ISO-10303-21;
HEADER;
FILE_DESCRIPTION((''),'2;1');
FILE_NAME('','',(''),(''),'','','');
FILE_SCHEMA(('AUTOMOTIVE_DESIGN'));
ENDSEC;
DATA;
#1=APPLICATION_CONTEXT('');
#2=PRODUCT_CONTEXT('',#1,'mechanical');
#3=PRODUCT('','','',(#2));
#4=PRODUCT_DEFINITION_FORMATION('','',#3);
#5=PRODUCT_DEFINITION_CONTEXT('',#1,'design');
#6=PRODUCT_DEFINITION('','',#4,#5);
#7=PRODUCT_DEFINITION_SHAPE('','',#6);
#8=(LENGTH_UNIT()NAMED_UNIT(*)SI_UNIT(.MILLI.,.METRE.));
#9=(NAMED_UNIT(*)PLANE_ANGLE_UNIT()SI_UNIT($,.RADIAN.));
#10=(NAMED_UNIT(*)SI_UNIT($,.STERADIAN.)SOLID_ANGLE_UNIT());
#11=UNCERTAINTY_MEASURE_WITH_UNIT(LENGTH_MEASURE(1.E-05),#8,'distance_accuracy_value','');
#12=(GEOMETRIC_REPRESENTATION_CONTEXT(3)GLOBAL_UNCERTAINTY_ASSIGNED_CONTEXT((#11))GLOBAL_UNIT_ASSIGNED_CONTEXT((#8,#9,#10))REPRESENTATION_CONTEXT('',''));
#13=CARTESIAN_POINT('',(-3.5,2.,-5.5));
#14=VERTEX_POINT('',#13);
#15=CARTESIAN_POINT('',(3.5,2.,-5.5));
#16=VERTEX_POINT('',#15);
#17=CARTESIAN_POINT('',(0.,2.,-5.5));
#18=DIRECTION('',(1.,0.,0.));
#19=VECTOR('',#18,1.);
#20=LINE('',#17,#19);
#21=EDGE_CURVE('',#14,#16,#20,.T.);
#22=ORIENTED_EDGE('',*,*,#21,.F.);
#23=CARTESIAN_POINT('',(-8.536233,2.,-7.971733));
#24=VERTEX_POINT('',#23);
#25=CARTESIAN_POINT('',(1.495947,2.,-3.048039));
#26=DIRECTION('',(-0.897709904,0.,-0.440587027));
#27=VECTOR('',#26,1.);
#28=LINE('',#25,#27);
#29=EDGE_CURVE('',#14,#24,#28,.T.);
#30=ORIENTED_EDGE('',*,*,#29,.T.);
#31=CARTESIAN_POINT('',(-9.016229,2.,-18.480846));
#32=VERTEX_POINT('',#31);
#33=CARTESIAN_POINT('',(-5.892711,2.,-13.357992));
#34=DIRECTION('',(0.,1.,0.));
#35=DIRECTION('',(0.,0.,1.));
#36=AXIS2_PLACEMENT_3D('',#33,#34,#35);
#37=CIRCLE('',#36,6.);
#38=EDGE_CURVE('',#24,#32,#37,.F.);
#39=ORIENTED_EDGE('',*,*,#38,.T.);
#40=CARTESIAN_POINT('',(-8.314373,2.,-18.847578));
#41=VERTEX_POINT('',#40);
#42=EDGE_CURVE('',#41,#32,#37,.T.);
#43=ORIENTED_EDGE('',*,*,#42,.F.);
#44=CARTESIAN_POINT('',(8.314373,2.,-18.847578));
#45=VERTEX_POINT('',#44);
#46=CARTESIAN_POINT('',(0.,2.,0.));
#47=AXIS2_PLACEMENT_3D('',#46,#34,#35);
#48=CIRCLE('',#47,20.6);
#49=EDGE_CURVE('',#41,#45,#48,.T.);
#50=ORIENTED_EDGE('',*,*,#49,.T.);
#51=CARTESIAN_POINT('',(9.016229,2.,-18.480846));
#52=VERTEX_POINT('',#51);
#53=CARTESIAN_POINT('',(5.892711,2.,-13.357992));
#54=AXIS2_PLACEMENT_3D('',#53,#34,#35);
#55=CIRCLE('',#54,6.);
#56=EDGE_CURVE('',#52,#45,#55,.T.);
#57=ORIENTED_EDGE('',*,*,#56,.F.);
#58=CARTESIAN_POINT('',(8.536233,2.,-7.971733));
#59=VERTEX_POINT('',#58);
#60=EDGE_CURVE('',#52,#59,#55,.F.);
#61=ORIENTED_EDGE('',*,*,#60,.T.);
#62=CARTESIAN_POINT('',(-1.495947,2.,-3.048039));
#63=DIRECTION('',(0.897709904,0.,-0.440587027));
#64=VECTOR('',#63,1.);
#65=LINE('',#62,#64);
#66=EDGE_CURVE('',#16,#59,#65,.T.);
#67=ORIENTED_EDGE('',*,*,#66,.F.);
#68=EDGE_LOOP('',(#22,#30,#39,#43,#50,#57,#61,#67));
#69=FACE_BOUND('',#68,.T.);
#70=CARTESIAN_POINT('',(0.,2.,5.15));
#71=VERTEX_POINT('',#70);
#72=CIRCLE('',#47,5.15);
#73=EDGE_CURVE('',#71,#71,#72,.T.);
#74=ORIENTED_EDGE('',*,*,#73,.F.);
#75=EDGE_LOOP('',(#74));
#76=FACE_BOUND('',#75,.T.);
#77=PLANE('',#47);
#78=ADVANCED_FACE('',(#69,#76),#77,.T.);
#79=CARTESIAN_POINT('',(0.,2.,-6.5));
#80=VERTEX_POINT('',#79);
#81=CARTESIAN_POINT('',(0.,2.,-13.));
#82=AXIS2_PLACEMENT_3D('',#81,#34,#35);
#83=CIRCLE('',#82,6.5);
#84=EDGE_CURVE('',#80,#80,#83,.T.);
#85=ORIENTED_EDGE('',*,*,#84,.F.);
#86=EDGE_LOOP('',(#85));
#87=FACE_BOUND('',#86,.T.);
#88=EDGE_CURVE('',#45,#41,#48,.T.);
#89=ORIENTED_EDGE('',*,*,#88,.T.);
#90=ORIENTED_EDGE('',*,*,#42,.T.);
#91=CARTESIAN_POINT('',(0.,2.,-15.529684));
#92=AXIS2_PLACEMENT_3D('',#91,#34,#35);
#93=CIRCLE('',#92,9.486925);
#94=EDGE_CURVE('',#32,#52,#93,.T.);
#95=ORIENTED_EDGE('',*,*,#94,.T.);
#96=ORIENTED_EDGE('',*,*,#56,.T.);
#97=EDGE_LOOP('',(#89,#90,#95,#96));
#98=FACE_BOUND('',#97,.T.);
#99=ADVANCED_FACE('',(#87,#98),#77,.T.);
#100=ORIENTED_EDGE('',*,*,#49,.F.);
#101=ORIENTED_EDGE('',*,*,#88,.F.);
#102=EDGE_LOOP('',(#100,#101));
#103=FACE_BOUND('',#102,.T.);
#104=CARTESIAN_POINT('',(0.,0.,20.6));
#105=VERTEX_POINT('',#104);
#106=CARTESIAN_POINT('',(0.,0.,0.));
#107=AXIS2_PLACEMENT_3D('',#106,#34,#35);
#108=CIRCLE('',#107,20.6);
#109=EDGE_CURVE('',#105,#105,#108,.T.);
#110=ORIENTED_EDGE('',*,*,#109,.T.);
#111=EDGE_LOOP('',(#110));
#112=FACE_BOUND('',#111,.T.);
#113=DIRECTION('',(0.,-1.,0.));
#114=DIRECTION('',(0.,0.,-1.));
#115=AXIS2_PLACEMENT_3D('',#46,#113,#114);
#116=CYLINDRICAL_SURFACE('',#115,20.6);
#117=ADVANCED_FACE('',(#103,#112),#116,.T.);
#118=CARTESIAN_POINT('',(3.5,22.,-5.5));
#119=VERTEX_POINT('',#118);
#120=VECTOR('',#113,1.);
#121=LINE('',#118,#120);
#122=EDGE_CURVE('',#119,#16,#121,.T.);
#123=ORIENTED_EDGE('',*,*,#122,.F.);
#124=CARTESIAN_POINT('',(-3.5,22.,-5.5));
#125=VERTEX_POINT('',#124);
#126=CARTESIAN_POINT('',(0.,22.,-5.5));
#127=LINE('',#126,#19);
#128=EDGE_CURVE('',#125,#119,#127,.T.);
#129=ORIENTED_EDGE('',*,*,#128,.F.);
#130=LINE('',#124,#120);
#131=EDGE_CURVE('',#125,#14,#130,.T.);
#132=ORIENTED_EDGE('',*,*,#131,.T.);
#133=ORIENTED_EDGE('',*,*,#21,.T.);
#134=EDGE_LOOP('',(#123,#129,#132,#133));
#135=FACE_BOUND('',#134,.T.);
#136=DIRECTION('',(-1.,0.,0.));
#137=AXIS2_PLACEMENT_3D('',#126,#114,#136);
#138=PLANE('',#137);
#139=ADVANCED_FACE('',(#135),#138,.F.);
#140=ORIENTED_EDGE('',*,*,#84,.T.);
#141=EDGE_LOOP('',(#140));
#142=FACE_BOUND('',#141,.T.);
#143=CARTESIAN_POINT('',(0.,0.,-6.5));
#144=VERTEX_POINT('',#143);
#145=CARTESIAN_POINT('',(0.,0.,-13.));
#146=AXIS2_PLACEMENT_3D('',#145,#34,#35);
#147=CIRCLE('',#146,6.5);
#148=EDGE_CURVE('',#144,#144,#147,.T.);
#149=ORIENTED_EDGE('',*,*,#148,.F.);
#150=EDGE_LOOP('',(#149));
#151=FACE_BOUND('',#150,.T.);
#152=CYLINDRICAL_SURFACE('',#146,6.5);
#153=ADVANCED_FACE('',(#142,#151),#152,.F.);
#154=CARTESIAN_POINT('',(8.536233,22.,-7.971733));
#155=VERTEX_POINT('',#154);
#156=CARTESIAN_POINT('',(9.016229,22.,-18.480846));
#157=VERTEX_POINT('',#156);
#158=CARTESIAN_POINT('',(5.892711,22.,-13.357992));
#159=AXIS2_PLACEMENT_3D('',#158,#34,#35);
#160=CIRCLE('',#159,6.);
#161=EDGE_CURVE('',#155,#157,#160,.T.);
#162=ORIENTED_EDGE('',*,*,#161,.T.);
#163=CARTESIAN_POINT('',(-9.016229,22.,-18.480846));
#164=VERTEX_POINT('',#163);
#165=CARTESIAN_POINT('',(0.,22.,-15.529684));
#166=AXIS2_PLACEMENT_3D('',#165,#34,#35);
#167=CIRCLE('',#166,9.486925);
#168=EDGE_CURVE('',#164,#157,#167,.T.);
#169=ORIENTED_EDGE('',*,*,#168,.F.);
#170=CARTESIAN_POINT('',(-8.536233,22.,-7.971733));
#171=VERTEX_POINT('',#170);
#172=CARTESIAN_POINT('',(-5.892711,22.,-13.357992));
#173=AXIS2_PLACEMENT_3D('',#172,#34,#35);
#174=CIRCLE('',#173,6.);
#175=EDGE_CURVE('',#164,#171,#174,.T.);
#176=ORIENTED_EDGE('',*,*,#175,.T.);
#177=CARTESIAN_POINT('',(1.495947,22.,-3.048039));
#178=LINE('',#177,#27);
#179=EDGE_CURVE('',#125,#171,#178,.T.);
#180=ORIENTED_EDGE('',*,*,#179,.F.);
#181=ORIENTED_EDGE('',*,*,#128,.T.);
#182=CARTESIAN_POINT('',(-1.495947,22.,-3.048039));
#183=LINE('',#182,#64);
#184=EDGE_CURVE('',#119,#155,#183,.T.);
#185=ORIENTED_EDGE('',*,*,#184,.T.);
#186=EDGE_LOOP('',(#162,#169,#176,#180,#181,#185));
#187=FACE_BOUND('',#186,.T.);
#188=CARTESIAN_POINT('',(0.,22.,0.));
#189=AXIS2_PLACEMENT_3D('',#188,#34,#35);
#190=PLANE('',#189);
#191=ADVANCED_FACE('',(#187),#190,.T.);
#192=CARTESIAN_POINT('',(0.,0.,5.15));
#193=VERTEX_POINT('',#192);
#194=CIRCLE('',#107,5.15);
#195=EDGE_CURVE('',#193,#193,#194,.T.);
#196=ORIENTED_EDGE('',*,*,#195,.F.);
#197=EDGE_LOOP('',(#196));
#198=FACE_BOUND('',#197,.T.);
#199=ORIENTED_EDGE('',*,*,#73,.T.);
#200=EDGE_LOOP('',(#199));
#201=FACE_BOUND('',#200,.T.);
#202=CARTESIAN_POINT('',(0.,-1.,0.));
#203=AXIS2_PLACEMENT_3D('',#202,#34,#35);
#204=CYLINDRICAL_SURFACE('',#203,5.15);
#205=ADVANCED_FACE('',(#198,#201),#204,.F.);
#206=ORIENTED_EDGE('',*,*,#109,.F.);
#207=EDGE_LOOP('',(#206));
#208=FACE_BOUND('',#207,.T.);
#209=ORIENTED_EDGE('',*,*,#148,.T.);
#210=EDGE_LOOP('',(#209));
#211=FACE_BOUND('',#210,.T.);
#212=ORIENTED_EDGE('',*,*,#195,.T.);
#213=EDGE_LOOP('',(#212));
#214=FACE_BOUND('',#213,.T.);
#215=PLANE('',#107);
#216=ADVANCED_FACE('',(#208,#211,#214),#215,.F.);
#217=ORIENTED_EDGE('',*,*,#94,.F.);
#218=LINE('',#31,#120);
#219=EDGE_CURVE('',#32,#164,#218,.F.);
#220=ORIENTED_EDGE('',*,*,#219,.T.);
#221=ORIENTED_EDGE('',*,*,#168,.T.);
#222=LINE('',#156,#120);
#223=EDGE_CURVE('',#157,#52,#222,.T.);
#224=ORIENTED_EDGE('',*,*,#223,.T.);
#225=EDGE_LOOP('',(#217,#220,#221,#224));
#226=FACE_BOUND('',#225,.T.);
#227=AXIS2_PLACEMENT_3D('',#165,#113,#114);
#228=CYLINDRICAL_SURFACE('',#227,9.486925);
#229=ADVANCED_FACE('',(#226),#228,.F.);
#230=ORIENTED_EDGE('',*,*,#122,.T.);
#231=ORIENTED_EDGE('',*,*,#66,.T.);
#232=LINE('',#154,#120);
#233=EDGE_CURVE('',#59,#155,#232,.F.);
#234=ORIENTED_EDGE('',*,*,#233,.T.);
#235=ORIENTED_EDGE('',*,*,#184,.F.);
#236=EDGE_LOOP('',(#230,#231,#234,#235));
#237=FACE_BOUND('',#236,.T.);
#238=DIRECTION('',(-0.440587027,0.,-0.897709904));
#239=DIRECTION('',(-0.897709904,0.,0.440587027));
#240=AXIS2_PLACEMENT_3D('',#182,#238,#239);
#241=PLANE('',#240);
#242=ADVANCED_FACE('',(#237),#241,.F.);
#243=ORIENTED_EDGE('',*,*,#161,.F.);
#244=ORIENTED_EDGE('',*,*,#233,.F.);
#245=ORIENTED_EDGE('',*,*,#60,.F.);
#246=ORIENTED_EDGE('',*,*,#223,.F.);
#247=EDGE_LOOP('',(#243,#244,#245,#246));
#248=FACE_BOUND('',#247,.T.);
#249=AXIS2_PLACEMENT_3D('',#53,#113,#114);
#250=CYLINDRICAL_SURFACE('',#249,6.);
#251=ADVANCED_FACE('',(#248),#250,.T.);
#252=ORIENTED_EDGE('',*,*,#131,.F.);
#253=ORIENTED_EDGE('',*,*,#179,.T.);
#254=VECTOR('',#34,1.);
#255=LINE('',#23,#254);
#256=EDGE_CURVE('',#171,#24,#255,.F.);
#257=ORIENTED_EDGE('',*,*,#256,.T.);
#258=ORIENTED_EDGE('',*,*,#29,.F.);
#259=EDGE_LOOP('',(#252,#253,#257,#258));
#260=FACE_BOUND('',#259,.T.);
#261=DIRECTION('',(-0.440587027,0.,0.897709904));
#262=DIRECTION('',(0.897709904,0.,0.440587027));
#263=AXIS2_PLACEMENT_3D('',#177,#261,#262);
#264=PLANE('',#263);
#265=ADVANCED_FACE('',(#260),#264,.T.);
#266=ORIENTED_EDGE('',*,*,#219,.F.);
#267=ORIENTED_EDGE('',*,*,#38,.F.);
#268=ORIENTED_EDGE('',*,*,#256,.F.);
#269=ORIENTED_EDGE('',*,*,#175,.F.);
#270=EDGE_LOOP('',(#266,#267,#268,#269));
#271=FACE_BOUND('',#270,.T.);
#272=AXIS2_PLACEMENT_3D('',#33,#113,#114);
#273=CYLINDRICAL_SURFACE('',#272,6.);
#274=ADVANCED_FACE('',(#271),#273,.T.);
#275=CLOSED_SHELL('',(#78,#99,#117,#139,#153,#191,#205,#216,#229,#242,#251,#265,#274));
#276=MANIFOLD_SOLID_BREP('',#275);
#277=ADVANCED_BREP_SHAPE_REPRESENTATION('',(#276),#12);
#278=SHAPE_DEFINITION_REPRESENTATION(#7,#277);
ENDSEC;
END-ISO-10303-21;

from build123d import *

# Parameters (mm, degrees)
SKETCH1_R           = 20.6
BOSS_EXTRUDE1_DEPTH = 2
SKETCH2_R           = 5.15
CUT_EXTRUDE1_DEPTH  = 3
SKETCH3_R           = 6.5
CUT_EXTRUDE2_DEPTH  = 2
BOSS_EXTRUDE4_DEPTH = 20
FILLET2_R           = 6


with BuildPart() as part:
    # Sketch1 → Boss-Extrude1 (new body)
    with BuildSketch(Plane(origin=(0, 0, 0), x_dir=(1, 0, 0), z_dir=(0, 1, 0))):
        with Locations(Location((0, 0, 0), (0, 0, 270))):
            Circle(SKETCH1_R)
    extrude(amount=BOSS_EXTRUDE1_DEPTH)

    # Sketch2 → Cut-Extrude1 (cut)
    with BuildSketch(Plane(origin=(0, 2, 0), x_dir=(1, 0, 0), z_dir=(0, 1, 0))):
        with Locations(Location((0, 0, 0), (0, 0, 270))):
            Circle(SKETCH2_R)
    extrude(amount=-CUT_EXTRUDE1_DEPTH, mode=Mode.SUBTRACT)

    # Sketch3 → Cut-Extrude2 (cut)
    with BuildSketch(Plane(origin=(0, 2, 0), x_dir=(1, 0, 0), z_dir=(0, 1, 0))):
        with Locations(Location((0, 13, 0), (0, 0, 270))):
            Circle(SKETCH3_R)
    extrude(amount=-CUT_EXTRUDE2_DEPTH, mode=Mode.SUBTRACT)

    # Sketch4 → Boss-Extrude4 (add)
    with BuildSketch(Plane(origin=(0, 2, 0), x_dir=(1, 0, 0), z_dir=(0, 1, 0))):
        with BuildLine():
            Line((-16.743954133, 12), (-3.5, 5.5))
            Line((-3.5, 5.5), (3.5, 5.5))
            Line((3.5, 5.5), (16.743954133, 12))
            ThreePointArc((16.743954133, 12), (13.279606143, 15.748398671), (9, 18.529975715))
            ThreePointArc((9, 18.529975715), (0, 6.042759079), (-9, 18.529975715))
            ThreePointArc((-9, 18.529975715), (-13.279606143, 15.748398671), (-16.743954133, 12))
        make_face()
    extrude(amount=BOSS_EXTRUDE4_DEPTH)

    # Fillet2
    # the kernel refuses this fillet: 6 mm, written as the material it takes off along each edge
    with BuildSketch(Plane(origin=(16.743954133, 2, -12), x_dir=(-0.7761796310564387, 0, -0.6305118399626535), z_dir=(0, 1, 0))) as fillet2_piece_1:
        with BuildLine():
            CenterArc((9.278744028, 5.78779133), FILLET2_R, 155.229237023, 130.054584679)
            Line((3.830795632, 8.301724161), (0, 0))
            ThreePointArc((0, 0), (5.430174062, -0.728583099), (10.860348123, 0))
        make_face()
    extrude(amount=47.150870308, mode=Mode.SUBTRACT)
    with BuildSketch(Plane(origin=(-16.743954133, 2, -12), x_dir=(0.7761796310564387, 0, -0.6305118399626534), z_dir=(0, 1, 0))) as fillet2_piece_2:
        with BuildLine():
            CenterArc((9.278744028, -5.78779133), FILLET2_R, 74.716178298, 130.054584679)
            Line((3.830795632, -8.301724161), (0, 0))
            ThreePointArc((0, 0), (5.430174062, 0.728583099), (10.860348123, 0))
        make_face()
    extrude(amount=47.150870308, mode=Mode.SUBTRACT)


solid = part.part
